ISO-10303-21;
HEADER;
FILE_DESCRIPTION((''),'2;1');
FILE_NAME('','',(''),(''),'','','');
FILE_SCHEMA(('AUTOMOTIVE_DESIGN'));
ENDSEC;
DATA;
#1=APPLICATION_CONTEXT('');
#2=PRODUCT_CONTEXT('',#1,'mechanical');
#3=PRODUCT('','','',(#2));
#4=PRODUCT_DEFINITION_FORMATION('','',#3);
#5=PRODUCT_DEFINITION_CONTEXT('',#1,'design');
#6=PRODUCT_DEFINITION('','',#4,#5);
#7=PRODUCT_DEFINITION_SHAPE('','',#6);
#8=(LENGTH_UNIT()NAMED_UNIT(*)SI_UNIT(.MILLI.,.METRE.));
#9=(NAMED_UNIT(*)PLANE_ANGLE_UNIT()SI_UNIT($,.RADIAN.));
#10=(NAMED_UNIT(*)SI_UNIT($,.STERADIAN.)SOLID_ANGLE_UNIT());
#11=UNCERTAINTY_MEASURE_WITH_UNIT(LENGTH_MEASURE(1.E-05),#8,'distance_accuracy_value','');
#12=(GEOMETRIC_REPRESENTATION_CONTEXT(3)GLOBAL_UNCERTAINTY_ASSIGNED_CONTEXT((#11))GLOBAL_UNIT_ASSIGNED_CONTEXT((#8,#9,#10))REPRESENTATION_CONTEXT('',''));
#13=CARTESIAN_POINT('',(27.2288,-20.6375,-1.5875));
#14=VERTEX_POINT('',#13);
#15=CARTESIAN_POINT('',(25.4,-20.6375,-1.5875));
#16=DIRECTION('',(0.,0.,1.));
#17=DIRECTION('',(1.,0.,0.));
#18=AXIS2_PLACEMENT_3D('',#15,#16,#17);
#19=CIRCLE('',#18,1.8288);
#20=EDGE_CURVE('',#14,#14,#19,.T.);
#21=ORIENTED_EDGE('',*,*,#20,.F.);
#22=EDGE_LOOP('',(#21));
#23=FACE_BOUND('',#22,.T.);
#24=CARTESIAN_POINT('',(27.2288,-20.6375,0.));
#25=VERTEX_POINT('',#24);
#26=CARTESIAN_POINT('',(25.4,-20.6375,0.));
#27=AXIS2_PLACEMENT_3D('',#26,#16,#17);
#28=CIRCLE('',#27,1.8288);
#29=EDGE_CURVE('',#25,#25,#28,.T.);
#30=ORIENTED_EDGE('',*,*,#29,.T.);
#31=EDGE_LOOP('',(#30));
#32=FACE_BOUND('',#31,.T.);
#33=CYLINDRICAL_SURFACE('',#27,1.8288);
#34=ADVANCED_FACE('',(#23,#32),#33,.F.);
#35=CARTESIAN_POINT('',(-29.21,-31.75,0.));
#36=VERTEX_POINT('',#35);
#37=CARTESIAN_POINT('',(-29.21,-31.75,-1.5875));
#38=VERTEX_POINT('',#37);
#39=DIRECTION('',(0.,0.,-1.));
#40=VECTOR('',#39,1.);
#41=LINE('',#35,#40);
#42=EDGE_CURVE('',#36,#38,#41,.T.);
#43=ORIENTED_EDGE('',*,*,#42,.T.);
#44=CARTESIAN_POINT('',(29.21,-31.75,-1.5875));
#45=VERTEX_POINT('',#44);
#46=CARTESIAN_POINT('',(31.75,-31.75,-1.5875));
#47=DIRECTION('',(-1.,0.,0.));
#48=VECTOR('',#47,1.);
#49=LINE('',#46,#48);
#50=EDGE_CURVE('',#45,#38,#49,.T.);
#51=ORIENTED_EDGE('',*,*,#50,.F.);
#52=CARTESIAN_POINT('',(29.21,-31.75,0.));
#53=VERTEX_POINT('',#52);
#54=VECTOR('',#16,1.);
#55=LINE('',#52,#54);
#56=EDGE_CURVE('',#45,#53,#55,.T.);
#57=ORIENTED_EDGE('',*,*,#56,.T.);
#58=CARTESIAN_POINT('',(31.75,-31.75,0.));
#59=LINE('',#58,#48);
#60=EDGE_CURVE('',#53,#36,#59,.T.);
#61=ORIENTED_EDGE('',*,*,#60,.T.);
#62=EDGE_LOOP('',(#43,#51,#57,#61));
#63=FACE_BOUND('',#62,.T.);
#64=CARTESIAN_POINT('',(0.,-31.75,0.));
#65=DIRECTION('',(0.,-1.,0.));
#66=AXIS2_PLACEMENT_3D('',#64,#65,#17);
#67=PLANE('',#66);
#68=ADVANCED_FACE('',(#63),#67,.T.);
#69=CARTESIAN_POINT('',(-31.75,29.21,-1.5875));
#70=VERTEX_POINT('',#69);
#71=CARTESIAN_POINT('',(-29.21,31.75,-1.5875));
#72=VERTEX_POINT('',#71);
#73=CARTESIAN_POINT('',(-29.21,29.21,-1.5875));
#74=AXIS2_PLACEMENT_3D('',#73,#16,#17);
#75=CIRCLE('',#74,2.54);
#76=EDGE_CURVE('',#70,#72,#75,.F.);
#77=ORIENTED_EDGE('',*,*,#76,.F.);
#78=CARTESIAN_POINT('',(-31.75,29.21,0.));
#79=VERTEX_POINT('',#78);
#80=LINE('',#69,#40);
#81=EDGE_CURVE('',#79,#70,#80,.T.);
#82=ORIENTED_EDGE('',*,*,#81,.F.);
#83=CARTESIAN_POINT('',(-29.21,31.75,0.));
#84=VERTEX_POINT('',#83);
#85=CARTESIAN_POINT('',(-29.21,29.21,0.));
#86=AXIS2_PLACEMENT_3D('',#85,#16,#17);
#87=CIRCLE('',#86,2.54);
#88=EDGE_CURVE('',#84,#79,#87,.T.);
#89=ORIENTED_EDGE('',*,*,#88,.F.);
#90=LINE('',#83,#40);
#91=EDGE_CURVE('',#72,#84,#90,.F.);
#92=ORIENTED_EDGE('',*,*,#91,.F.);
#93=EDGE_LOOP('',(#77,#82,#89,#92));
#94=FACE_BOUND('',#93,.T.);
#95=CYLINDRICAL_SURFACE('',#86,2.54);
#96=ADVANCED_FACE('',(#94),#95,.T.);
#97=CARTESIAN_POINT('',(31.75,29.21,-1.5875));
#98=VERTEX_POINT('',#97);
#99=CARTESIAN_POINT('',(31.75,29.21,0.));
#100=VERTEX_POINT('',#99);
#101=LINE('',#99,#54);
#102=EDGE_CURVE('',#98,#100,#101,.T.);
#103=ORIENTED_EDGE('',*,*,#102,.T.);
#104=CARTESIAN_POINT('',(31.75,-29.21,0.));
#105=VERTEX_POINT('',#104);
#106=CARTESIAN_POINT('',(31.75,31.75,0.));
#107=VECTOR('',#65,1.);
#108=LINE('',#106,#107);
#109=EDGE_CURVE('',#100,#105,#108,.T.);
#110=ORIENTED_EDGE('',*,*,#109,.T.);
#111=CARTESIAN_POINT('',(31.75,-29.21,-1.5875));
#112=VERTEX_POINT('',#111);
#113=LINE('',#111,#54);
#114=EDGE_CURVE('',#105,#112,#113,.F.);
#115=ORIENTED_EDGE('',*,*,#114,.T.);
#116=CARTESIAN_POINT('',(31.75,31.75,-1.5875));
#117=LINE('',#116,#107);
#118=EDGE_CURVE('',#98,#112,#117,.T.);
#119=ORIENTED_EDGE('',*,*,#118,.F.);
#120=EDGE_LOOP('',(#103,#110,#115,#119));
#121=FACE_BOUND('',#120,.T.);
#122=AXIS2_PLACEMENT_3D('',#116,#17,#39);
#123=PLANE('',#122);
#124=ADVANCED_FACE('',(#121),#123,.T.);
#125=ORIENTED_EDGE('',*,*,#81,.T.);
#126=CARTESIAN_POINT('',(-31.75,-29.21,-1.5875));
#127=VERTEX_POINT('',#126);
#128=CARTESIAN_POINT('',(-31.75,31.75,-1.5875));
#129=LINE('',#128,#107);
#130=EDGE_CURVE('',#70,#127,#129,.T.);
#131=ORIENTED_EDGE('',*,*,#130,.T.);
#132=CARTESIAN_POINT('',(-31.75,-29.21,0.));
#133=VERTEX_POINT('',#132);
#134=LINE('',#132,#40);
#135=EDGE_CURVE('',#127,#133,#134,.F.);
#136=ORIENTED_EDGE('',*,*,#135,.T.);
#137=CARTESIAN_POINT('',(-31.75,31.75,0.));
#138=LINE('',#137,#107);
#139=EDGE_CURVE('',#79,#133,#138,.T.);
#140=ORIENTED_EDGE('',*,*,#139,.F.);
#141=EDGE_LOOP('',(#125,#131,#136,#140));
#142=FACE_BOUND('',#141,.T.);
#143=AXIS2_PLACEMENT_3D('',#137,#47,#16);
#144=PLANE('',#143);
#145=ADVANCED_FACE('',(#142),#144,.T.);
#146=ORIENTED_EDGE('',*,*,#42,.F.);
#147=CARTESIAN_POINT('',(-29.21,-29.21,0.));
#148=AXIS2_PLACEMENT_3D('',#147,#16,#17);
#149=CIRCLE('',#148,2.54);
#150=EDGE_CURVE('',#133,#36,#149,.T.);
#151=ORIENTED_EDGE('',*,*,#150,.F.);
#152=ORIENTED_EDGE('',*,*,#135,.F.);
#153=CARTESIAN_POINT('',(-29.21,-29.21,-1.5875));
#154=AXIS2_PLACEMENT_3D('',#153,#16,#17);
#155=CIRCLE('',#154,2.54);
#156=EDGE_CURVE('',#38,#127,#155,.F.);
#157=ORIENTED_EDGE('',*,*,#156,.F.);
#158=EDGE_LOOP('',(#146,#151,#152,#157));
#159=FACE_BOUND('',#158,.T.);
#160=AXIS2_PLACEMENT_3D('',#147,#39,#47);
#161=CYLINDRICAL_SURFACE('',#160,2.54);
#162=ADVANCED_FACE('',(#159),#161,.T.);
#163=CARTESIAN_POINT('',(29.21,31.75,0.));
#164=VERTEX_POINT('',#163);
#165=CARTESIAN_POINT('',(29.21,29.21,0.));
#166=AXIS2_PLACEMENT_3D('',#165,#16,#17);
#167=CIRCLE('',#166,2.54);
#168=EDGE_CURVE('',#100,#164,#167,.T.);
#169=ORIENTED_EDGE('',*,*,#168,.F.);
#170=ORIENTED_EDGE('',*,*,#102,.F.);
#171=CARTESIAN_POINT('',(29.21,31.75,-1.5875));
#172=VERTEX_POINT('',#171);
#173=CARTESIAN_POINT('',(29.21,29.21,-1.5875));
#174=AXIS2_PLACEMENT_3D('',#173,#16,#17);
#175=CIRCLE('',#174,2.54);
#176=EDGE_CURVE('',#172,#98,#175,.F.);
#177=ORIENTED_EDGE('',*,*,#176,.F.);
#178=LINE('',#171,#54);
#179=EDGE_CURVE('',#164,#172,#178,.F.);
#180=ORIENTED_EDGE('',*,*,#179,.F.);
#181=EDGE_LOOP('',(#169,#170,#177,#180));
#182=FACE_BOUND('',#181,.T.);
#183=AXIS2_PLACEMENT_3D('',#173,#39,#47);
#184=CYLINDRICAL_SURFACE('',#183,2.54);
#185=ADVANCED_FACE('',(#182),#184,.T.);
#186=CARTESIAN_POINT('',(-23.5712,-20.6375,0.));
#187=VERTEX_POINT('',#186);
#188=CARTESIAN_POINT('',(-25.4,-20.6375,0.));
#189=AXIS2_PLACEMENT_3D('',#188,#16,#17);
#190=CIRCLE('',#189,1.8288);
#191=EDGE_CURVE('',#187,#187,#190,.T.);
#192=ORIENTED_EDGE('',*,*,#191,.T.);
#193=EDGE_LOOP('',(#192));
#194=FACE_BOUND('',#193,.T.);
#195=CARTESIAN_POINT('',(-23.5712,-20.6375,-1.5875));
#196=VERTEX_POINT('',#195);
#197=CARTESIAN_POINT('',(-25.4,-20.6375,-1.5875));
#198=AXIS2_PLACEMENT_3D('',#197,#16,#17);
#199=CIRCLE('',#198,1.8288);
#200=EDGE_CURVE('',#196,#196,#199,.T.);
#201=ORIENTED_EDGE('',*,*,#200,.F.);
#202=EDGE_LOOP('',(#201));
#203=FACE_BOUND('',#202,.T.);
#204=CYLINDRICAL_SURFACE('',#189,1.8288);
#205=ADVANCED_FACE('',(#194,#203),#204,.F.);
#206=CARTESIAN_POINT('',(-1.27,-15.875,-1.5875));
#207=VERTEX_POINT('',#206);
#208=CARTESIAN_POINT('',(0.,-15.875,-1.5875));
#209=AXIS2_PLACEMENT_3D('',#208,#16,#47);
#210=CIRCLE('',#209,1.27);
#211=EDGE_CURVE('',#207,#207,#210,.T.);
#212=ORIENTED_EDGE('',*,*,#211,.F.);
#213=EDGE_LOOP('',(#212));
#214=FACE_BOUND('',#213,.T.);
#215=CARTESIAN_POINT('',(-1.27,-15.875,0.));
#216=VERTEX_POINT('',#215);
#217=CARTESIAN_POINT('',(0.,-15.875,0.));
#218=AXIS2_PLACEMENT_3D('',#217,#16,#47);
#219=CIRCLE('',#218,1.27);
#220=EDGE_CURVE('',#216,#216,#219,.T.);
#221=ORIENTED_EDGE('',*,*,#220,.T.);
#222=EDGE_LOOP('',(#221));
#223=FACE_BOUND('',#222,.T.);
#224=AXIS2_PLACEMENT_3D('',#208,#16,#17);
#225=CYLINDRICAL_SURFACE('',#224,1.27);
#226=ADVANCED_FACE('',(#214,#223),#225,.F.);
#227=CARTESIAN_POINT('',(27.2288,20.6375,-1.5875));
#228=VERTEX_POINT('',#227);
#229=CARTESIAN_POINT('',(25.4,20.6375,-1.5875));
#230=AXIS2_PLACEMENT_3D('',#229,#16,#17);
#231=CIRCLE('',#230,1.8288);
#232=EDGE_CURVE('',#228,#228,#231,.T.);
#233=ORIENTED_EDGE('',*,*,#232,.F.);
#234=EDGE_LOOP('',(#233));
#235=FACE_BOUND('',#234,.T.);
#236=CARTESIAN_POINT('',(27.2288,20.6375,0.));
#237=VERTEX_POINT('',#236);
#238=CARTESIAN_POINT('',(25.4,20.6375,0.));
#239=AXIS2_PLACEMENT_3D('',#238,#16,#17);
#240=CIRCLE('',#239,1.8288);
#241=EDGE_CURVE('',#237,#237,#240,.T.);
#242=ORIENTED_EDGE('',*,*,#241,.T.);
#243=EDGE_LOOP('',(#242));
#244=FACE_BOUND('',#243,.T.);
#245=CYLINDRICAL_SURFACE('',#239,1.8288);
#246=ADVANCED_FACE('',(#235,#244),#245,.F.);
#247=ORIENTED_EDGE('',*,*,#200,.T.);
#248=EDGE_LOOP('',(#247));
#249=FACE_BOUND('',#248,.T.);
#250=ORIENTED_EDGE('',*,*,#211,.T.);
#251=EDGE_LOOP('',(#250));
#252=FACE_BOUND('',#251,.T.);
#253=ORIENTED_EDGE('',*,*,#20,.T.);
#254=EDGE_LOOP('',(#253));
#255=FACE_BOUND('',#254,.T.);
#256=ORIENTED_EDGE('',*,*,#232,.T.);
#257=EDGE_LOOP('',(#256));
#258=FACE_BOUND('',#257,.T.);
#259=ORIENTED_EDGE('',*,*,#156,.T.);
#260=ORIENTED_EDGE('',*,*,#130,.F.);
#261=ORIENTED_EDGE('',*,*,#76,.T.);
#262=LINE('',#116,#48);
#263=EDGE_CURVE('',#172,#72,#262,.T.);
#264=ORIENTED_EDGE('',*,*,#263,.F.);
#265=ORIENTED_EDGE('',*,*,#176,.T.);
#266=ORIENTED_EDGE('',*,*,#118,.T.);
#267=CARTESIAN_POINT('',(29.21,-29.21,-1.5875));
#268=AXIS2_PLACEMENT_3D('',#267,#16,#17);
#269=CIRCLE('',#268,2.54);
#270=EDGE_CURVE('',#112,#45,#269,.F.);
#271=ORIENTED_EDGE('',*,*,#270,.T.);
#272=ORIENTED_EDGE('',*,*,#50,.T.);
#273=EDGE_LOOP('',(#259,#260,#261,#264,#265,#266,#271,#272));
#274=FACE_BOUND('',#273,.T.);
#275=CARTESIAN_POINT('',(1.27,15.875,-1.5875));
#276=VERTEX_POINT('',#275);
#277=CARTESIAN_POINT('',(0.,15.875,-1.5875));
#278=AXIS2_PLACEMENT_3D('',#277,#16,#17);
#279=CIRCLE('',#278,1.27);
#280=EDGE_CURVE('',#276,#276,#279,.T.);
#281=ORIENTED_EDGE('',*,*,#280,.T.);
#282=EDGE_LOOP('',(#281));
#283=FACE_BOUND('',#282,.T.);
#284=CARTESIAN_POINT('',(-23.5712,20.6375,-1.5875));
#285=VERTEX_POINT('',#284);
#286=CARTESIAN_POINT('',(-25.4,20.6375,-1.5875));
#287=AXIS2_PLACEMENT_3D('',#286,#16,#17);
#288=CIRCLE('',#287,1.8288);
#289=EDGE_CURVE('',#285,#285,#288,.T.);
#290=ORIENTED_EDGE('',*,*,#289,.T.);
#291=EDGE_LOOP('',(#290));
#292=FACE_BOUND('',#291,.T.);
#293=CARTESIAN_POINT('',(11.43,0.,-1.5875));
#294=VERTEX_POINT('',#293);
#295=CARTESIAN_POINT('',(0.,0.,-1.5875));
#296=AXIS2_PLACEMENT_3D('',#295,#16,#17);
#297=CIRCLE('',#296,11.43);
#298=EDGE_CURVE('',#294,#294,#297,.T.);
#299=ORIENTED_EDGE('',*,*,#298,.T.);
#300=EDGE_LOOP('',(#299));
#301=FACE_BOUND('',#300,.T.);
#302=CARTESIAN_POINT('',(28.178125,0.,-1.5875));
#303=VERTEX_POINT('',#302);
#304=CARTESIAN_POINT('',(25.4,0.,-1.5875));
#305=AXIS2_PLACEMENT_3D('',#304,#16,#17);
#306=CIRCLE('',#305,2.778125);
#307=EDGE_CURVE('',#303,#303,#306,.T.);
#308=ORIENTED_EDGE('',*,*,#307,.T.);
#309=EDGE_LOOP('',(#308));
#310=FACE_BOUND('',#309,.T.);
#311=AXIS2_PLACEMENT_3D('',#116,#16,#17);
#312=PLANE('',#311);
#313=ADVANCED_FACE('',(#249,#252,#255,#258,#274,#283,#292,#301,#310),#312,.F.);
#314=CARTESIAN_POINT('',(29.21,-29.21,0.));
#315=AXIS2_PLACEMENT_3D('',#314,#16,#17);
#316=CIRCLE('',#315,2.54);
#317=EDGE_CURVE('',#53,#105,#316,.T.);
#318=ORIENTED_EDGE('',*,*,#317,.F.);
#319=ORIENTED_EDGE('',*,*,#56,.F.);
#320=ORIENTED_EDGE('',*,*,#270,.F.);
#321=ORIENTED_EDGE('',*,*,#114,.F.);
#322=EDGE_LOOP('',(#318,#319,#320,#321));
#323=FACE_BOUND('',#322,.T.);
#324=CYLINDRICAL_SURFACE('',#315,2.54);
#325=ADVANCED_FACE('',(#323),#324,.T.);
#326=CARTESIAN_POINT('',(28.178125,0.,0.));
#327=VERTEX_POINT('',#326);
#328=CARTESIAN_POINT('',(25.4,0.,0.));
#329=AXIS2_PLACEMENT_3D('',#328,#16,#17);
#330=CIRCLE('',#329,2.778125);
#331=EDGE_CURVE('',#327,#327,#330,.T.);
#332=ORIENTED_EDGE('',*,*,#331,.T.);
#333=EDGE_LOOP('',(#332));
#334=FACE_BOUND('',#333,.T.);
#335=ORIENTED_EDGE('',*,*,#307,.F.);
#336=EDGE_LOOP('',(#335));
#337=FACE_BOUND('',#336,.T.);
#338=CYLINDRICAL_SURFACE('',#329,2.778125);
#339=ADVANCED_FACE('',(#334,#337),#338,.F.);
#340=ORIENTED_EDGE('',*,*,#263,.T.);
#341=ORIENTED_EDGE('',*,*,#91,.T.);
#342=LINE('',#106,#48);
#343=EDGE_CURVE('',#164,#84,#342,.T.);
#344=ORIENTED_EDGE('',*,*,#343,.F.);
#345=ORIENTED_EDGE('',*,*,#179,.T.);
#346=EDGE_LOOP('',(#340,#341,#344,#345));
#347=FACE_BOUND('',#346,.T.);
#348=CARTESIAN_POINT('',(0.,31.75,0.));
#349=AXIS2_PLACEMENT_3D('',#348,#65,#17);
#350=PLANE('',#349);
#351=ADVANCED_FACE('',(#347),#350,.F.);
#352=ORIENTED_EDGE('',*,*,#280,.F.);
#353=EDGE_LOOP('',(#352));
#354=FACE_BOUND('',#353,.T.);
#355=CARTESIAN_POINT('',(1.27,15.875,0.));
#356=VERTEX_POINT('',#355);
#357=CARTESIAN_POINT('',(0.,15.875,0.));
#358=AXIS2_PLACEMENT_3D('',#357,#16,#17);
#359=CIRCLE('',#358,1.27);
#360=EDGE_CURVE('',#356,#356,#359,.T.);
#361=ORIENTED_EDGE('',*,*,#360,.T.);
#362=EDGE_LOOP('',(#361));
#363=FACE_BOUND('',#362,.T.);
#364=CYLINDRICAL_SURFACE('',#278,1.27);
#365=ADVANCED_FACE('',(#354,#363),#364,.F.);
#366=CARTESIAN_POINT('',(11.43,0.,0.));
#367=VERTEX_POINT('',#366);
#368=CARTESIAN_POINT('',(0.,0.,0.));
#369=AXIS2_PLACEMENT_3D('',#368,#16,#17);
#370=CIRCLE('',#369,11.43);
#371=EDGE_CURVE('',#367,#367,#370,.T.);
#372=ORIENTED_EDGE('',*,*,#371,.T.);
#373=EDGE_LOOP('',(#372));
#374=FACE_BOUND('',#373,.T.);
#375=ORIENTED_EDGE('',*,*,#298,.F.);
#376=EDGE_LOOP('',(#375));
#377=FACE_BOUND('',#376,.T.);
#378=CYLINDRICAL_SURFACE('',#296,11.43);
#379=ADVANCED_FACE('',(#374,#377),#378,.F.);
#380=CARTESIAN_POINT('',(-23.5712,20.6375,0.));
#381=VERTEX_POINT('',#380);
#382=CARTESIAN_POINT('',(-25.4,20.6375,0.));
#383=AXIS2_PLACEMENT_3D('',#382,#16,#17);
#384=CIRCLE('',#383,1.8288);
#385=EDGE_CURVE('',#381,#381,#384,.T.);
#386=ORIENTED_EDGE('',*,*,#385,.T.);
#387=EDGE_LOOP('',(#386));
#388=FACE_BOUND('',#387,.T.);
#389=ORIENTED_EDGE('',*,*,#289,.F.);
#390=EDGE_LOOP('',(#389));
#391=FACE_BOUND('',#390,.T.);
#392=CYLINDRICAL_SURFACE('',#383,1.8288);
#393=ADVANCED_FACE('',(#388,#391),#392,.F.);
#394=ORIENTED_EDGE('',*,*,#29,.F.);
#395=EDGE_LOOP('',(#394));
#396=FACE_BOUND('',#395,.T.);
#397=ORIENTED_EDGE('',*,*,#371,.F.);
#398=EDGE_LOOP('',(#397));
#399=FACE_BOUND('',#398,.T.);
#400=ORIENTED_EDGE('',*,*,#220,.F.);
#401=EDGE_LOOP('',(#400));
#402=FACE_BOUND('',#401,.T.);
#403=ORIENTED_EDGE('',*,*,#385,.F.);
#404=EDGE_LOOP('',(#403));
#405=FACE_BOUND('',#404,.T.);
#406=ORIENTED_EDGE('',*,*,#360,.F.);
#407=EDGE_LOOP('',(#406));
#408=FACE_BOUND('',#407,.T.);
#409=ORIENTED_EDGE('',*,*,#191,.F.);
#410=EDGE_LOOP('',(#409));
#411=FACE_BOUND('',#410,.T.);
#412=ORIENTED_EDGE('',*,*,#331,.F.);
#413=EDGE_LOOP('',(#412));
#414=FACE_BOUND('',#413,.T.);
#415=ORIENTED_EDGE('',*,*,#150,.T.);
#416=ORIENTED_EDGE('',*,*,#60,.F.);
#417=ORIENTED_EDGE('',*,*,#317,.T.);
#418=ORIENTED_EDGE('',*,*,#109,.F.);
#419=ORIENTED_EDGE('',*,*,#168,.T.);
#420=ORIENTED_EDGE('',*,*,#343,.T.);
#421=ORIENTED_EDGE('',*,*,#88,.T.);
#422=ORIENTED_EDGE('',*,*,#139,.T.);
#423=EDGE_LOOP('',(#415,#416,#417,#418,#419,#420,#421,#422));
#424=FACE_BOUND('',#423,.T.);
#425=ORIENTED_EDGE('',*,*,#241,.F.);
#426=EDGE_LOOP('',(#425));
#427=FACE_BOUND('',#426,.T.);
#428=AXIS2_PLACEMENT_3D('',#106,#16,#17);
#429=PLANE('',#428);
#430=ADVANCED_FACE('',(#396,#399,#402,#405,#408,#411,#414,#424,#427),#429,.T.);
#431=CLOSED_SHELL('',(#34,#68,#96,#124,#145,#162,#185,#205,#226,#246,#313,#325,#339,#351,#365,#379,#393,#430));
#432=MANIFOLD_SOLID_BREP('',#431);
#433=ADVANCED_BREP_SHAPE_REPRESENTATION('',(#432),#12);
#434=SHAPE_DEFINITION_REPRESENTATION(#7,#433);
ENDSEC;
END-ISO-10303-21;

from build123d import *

# Parameters (mm, degrees)
SKETCH3_W                       = 63.5
SKETCH3_H                       = 1.5875
BASE_FLANGE1_DEPTH              = 31.75
FILLET1_R                       = 2.54
F_27_0_144_DIAMETER_HOLE1_D     = 3.6576
SKETCH10_R                      = 11.43
SKETCH10_R_2                    = 1.27
CUT_EXTRUDE1_DEPTH              = 45.929335141
F_7_32_0_21875_DIAMETER_HOLE1_D = 5.55625


# Sheet-metal steps are written as plain solids
with BuildPart() as part:
    # Sketch3 → Base-Flange1 (new, symmetric)
    with BuildSketch(Plane(origin=(0, 0, 0), x_dir=(-1, 0, 0), z_dir=(0, 1, 0))):
        with Locations((0, -0.79375)):
            Rectangle(SKETCH3_W, SKETCH3_H)
    extrude(amount=BASE_FLANGE1_DEPTH, both=True)

    # Fillet1
    fillet1_edges = [part.edges().sort_by_distance(p)[0] for p in [
        (31.75, 31.75, -0.79375),
        (31.75, -31.75, -0.79375),
        (-31.75, -31.75, -0.79375),
        (-31.75, 31.75, -0.79375),
    ]]
    fillet(fillet1_edges, radius=FILLET1_R)

    # #27 (0.144) Diameter Hole1 (through all)
    with Locations(Plane.XY):
        with Locations((-25.4, 20.6375), (25.4, 20.6375), (25.4, -20.6375), (-25.4, -20.6375)):
            Hole(F_27_0_144_DIAMETER_HOLE1_D / 2)

    # Sketch10 → Cut-Extrude1 (cut, through all)
    with BuildSketch(Plane.XY):
        Circle(SKETCH10_R)
        with Locations((0, 15.875)):
            Circle(SKETCH10_R_2)
        with Locations(Location((0, -15.875, 0), (0, 0, 180))):
            Circle(SKETCH10_R_2)
    extrude(amount=-CUT_EXTRUDE1_DEPTH, mode=Mode.SUBTRACT)

    # 7/32 (0.21875) Diameter Hole1 (through all)
    with Locations(Plane.XY):
        with Locations((25.4, 0)):
            Hole(F_7_32_0_21875_DIAMETER_HOLE1_D / 2)


solid = part.part
